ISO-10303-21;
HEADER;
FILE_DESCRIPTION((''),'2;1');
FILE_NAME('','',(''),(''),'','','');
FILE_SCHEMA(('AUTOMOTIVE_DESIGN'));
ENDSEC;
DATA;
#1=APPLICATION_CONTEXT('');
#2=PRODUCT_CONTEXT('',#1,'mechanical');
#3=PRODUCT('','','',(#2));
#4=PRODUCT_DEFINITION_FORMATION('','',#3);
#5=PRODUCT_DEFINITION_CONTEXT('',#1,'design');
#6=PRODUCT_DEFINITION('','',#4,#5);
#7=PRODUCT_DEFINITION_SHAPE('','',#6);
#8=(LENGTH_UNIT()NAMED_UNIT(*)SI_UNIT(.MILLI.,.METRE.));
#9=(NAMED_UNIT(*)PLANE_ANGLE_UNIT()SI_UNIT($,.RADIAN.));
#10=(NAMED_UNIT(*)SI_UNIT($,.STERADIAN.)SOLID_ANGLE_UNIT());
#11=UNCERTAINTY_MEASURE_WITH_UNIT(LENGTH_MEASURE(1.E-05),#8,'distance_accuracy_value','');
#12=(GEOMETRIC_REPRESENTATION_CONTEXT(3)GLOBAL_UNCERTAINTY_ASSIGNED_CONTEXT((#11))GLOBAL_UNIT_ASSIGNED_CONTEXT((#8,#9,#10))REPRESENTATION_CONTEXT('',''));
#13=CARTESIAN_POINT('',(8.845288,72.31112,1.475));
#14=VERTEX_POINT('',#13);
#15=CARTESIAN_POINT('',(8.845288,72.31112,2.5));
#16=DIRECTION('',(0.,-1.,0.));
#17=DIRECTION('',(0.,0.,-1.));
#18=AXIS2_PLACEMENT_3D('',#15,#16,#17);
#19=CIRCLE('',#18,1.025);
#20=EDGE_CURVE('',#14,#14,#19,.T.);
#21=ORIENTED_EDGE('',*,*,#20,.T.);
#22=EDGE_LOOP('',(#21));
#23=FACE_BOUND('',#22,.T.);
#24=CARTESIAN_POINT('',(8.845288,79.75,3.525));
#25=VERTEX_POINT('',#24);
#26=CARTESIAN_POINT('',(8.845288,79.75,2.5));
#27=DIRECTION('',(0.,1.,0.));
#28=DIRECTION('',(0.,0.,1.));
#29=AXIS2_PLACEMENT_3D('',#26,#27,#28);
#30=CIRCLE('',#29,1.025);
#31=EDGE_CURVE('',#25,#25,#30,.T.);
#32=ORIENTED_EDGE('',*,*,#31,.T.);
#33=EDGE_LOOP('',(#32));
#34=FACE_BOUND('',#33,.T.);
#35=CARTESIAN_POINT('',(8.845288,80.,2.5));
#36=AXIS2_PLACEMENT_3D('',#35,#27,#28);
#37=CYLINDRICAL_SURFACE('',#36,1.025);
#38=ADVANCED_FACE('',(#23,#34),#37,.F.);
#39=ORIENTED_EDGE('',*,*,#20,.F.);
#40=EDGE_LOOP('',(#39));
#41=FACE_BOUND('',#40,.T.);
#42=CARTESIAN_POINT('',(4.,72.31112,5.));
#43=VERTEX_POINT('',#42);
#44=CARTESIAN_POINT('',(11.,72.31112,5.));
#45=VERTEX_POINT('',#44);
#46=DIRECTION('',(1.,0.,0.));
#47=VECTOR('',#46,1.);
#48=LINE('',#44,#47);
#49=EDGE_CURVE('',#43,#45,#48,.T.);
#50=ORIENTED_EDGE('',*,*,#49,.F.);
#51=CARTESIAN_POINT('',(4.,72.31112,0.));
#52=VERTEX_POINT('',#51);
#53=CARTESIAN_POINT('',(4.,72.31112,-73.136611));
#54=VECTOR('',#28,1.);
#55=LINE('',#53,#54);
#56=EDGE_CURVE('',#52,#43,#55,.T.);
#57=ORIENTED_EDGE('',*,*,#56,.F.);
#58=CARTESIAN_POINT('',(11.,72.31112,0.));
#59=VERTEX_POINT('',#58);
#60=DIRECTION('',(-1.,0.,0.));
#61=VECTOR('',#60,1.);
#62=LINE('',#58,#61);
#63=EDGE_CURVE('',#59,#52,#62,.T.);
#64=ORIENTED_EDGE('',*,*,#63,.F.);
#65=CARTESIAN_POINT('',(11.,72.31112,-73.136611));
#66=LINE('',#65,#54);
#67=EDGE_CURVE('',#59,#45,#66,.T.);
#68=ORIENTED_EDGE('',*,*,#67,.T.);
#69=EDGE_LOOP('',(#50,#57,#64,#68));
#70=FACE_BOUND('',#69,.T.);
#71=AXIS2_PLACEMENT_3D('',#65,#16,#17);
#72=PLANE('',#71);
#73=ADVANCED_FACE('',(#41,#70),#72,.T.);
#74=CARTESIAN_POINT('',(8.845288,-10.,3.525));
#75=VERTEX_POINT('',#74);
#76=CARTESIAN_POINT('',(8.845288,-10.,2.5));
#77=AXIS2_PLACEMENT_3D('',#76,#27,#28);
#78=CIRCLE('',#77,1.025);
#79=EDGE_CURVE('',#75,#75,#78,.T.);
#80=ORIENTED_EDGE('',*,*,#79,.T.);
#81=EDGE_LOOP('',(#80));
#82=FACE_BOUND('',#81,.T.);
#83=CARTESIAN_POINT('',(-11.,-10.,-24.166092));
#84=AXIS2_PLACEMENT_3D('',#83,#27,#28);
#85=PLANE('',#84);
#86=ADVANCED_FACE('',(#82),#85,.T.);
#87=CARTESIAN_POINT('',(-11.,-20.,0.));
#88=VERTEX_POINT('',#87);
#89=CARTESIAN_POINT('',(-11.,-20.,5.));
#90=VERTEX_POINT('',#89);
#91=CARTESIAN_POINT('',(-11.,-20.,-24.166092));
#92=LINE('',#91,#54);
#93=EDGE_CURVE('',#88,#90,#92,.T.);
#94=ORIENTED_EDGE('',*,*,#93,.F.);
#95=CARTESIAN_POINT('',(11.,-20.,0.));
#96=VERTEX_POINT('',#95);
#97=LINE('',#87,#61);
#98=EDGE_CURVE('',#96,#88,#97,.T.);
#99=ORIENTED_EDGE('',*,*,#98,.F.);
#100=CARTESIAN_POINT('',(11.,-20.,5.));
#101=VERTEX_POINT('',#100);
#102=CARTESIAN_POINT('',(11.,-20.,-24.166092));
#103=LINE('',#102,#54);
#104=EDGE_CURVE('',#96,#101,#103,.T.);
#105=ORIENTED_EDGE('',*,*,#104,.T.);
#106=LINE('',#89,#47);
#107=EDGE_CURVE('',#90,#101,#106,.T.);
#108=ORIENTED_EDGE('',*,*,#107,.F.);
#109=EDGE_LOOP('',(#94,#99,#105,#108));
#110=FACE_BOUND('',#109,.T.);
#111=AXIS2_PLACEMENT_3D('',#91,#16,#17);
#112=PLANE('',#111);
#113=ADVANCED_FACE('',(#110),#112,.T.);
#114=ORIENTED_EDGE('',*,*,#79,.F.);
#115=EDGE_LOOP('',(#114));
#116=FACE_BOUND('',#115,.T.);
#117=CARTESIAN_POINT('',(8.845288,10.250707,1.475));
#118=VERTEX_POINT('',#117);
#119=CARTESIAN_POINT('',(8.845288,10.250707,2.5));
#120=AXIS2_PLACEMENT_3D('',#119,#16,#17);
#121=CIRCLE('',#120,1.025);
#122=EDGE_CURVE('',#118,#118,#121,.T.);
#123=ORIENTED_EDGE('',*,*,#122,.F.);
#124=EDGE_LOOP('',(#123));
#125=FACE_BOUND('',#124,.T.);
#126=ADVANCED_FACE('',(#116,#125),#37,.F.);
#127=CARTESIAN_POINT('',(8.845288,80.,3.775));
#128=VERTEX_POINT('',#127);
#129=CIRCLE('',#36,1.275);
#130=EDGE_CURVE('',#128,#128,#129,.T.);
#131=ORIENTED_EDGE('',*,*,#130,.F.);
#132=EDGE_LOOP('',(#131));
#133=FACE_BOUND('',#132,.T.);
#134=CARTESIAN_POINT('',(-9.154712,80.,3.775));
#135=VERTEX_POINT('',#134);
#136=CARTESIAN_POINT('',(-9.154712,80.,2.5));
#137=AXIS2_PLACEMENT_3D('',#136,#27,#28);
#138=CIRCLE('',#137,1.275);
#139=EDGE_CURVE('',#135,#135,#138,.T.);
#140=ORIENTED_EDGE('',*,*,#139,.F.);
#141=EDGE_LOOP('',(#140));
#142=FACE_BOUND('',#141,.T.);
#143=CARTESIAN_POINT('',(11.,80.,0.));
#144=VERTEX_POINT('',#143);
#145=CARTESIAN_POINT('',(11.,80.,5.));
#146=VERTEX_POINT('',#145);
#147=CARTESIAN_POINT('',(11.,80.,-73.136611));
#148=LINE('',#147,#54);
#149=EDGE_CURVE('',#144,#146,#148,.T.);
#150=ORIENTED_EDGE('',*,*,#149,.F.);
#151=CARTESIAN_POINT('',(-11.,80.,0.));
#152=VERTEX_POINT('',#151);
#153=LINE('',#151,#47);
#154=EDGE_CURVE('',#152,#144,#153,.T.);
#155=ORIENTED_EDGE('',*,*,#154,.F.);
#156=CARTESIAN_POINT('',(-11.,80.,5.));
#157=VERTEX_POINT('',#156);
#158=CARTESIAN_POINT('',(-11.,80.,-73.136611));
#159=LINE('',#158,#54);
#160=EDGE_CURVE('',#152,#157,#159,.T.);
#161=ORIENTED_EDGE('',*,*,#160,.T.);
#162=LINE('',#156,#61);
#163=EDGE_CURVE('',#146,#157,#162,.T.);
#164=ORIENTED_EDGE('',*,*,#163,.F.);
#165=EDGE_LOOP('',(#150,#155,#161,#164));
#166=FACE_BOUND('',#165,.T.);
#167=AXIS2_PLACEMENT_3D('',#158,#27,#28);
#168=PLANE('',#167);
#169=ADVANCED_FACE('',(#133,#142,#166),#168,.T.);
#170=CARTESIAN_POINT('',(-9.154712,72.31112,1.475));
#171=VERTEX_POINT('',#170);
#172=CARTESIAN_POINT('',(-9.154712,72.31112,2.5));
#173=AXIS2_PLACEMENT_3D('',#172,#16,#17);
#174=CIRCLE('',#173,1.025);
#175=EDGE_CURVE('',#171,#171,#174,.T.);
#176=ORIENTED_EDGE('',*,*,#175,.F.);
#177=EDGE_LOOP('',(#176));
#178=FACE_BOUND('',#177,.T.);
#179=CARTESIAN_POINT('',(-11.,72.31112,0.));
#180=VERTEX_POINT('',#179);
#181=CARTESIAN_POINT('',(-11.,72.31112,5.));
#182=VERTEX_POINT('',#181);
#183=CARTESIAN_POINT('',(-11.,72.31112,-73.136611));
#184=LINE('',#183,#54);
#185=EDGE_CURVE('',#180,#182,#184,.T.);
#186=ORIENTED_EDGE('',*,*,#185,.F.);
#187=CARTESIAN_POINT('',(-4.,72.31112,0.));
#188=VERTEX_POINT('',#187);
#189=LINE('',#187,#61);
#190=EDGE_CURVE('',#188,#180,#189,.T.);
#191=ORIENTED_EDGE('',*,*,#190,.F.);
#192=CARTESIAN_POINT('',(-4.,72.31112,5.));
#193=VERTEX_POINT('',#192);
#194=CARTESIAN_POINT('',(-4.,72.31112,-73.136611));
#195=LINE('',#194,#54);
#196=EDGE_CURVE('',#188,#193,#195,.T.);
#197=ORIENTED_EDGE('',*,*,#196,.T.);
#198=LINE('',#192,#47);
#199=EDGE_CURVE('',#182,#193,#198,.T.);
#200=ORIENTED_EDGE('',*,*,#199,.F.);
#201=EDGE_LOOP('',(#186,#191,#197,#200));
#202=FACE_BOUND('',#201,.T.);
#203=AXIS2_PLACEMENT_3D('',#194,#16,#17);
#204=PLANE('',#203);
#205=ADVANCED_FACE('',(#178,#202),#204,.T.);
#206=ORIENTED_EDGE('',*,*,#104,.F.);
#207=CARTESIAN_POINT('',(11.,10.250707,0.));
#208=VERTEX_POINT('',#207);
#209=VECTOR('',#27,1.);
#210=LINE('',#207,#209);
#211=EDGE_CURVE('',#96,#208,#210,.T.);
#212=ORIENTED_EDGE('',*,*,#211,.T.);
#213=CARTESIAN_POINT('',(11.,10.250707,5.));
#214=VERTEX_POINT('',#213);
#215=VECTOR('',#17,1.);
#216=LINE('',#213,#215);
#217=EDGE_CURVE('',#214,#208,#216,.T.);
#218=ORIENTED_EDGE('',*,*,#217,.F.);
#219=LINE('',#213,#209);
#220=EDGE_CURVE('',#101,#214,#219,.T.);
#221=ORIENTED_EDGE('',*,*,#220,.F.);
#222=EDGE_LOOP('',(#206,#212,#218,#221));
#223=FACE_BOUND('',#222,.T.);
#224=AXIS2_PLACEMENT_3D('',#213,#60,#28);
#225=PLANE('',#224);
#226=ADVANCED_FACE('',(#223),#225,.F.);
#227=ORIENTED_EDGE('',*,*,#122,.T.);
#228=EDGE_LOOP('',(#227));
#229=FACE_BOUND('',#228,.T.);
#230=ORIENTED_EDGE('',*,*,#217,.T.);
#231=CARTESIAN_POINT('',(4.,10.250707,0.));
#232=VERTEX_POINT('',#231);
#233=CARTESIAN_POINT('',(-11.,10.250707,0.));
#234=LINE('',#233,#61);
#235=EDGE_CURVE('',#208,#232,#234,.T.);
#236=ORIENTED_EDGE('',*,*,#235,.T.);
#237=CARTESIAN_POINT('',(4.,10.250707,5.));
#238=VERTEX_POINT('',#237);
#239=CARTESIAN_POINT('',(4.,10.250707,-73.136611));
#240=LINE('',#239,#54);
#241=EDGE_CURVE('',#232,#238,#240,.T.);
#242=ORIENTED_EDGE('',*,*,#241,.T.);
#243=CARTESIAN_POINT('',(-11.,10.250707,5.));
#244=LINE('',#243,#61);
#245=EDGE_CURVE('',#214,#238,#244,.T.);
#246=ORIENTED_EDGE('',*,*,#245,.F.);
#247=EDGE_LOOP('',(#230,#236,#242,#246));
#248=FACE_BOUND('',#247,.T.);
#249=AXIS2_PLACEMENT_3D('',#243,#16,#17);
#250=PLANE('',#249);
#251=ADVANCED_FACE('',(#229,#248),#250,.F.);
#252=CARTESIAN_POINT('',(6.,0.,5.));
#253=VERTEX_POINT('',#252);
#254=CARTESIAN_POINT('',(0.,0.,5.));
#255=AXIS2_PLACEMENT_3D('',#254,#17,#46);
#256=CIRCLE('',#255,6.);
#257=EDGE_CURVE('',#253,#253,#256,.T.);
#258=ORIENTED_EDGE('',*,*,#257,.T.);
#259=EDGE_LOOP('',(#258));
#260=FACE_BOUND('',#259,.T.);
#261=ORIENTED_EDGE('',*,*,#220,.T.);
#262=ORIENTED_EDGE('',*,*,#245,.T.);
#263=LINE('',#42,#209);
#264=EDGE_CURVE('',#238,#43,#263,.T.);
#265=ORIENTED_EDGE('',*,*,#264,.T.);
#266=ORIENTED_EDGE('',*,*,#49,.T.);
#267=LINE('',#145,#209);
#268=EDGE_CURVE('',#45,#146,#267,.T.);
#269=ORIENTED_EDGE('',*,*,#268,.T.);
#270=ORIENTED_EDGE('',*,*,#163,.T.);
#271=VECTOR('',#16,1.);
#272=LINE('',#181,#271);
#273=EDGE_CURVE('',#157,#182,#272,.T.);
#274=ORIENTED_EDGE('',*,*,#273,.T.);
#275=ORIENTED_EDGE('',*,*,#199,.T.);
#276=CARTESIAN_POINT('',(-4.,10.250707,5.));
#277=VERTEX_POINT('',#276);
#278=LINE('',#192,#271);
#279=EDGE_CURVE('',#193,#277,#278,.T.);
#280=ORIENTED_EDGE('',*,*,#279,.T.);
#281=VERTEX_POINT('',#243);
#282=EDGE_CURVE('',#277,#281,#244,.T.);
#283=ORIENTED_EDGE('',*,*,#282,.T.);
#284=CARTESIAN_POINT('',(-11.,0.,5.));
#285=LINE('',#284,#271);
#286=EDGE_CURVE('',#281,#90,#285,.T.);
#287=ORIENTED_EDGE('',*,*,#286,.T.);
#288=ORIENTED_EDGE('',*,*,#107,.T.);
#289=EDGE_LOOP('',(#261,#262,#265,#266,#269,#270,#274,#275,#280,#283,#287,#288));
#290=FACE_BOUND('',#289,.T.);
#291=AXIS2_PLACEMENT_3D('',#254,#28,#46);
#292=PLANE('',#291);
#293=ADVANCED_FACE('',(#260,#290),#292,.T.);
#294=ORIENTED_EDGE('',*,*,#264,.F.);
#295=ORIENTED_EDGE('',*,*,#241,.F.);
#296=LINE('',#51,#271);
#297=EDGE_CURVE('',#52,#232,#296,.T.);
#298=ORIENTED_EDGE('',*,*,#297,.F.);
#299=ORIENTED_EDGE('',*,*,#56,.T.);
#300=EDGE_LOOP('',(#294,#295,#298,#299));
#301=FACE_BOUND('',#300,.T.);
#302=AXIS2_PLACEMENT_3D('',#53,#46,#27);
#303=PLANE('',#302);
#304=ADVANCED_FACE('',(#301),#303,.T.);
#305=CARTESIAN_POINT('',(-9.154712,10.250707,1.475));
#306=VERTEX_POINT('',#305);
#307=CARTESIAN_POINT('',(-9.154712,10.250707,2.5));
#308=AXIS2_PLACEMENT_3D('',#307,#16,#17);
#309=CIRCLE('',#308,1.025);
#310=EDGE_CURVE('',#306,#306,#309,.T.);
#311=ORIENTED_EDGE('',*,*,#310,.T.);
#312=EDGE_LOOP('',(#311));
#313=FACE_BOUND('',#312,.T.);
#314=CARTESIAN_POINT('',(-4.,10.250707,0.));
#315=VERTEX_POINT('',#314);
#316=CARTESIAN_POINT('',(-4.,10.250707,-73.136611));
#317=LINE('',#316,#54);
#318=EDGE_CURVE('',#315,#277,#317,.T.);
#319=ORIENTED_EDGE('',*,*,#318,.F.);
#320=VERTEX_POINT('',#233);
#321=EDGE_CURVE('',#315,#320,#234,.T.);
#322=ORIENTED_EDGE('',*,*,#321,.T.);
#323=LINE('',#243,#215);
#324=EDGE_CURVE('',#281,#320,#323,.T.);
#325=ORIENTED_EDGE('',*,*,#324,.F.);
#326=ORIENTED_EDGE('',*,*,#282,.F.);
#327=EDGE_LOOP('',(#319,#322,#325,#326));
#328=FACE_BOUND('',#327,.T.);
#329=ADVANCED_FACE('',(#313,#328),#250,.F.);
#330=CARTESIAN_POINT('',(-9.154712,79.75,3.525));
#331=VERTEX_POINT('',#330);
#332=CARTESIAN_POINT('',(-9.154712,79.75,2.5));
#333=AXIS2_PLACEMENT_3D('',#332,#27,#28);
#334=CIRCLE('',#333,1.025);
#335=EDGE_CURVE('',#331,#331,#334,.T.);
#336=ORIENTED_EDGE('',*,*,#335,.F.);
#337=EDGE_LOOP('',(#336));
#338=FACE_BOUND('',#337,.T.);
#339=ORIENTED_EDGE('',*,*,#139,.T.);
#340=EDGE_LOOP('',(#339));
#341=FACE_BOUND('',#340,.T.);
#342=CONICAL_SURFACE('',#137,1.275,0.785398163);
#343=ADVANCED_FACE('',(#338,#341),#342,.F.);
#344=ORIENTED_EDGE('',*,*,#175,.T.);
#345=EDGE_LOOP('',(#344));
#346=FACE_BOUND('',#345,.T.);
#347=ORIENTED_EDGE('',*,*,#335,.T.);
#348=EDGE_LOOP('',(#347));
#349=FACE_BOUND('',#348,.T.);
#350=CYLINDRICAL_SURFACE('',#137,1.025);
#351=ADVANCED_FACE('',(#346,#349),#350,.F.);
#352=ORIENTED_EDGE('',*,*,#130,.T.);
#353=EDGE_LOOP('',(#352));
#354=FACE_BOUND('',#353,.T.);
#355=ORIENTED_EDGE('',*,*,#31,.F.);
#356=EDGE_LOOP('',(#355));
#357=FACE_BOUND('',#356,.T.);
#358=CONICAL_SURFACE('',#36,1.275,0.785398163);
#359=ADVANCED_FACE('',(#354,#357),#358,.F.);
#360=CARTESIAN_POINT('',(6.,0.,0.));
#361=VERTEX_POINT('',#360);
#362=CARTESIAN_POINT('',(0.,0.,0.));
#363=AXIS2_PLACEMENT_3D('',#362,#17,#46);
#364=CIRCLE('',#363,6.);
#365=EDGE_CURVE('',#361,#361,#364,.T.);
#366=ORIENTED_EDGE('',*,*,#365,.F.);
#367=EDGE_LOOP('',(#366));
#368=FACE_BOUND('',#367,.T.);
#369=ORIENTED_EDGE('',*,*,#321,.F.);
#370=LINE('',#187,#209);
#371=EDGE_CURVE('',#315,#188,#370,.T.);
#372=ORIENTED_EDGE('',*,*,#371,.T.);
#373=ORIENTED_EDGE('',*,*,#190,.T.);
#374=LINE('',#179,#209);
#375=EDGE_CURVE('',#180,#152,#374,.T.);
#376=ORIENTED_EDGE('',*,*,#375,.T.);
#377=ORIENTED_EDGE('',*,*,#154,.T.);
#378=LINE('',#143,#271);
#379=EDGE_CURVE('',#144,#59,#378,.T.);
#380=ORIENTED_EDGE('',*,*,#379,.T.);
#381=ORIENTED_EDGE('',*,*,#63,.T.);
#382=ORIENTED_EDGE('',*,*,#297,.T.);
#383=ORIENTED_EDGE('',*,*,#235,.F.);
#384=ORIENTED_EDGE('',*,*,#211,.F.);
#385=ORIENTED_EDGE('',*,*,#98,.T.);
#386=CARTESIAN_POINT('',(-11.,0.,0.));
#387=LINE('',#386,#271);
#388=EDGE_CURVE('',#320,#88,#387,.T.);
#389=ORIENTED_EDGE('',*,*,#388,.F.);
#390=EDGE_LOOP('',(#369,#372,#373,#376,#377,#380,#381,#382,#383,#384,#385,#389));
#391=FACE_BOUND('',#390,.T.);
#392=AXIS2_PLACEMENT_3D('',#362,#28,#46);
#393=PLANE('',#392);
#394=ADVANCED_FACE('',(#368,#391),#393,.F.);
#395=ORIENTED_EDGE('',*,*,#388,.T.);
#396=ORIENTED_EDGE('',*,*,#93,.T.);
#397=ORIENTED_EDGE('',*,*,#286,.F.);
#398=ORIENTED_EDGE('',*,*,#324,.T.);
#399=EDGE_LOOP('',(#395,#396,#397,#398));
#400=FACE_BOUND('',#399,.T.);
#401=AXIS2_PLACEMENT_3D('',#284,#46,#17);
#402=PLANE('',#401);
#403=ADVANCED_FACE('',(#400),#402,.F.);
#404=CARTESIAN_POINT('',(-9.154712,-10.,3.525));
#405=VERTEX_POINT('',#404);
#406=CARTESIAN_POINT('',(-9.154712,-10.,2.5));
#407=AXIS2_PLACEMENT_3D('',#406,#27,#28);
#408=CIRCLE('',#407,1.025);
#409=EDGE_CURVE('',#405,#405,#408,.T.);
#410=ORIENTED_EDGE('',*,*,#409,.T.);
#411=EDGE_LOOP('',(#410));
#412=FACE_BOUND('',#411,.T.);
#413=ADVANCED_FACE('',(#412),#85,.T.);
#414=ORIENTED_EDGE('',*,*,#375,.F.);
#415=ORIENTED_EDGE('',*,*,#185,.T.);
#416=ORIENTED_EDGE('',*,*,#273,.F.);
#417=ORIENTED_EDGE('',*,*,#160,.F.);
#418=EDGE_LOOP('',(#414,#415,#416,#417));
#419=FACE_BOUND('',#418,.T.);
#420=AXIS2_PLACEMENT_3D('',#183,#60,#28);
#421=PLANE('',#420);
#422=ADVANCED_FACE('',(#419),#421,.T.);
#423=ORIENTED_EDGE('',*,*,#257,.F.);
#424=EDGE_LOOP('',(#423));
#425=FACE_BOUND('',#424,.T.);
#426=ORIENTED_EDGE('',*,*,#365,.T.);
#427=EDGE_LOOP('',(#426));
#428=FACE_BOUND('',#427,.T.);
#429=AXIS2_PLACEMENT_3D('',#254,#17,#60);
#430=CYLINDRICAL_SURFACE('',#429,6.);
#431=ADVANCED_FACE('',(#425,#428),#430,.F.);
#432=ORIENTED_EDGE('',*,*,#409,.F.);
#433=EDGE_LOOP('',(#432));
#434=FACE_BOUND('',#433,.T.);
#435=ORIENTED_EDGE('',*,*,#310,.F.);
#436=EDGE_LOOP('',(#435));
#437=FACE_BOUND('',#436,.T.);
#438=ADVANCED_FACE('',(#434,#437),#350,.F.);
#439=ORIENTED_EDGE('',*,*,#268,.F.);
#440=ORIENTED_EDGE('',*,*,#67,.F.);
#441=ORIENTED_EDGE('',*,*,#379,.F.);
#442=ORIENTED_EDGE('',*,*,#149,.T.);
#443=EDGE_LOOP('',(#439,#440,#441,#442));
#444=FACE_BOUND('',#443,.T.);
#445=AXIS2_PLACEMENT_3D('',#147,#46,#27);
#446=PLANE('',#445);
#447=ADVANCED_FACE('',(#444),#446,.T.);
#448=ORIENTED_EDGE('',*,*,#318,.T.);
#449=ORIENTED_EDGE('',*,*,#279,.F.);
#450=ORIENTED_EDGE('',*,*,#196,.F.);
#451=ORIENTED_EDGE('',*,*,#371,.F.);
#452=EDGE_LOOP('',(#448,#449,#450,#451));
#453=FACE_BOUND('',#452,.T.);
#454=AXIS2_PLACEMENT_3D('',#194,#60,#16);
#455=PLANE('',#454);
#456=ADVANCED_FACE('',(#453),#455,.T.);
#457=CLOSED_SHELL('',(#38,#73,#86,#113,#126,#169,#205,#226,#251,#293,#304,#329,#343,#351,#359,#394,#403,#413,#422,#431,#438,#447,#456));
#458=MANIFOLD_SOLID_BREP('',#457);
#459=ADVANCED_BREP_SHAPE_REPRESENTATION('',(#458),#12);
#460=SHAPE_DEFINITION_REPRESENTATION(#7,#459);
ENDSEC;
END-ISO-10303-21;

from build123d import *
from build123d.topology import SkipClean

# Parameters (mm, degrees)
EXTRUDE_1_DEPTH                = 5
EXTRUDE_2_DEPTH                = 5
EXTRUDE_START                  = -5
EXTRUDE_3_DEPTH                = 5
HOLE_WIZARD_M2_5_1_D           = 2.05
HOLE_WIZARD_M2_5_1_CSINK_D     = 2.55
HOLE_WIZARD_M2_5_1_CSINK_ANGLE = 90
SKETCH_7_W                     = 22
SKETCH_7_H                     = 10
EXTRUDE_4_DEPTH                = 5


with BuildPart() as part:
    # 草图1 → 凸台-拉伸1 (new body)
    with BuildSketch(Plane.XY):
        with BuildLine():
            Line((-6, 0), (-11, 0))
            Line((-11, 0), (-11, 10.250706887))
            Line((-11, 10.250706887), (11, 10.250706887))
            Line((11, 10.250706887), (11, 0))
            Line((11, 0), (6, 0))
            ThreePointArc((6, 0), (0, 6), (-6, 0))
        make_face()
    extrude(amount=EXTRUDE_1_DEPTH)

    # 草图2 → 凸台-拉伸2 (add)
    with BuildSketch(Plane.XY.offset(5)):
        Polygon((4, 72.311119812), (4, 10.250706887), (-4, 10.250706887), (-4, 72.311119812), (-11, 72.311119812), (-11, 80), (11, 80), (11, 72.311119812), align=None)
    extrude(amount=-EXTRUDE_2_DEPTH)

    # 草图6 → 凸台-拉伸3 (add)
    with SkipClean():  # the faces are left unmerged after this step: merging them gives an invalid solid
        with BuildSketch(Plane(origin=(0, 0, 0), x_dir=(-1, 0, 0), z_dir=(0, 0, -1)).offset(EXTRUDE_START)):
            with BuildLine():
                Line((-11, 0), (-11, -10))
                Line((-11, -10), (11, -10))
                Line((11, -10), (11, 0))
                Line((11, 0), (6, 0))
                ThreePointArc((6, 0), (0, -6), (-6, 0))
                Line((-6, 0), (-11, 0))
            make_face()
        extrude(amount=EXTRUDE_3_DEPTH)
    add(part.part.scale(1), mode=Mode.REPLACE)  # the faces are merged on a copy

    # M2.5 螺纹孔1 (through all)
    with Locations(Plane(origin=(0, 80, 0), x_dir=(1, 0, 0), z_dir=(0, 1, 0))):
        with Locations((-9.154712184, -2.5), (8.845287816, -2.5)):
            CounterSinkHole(HOLE_WIZARD_M2_5_1_D / 2, HOLE_WIZARD_M2_5_1_CSINK_D / 2, counter_sink_angle=HOLE_WIZARD_M2_5_1_CSINK_ANGLE)

    # 草图7 → 凸台-拉伸4 (add)
    with BuildSketch(Plane.XY.offset(5)):
        with Locations((0, -15)):
            Rectangle(SKETCH_7_W, SKETCH_7_H)
    extrude(amount=-EXTRUDE_4_DEPTH)


solid = part.part
